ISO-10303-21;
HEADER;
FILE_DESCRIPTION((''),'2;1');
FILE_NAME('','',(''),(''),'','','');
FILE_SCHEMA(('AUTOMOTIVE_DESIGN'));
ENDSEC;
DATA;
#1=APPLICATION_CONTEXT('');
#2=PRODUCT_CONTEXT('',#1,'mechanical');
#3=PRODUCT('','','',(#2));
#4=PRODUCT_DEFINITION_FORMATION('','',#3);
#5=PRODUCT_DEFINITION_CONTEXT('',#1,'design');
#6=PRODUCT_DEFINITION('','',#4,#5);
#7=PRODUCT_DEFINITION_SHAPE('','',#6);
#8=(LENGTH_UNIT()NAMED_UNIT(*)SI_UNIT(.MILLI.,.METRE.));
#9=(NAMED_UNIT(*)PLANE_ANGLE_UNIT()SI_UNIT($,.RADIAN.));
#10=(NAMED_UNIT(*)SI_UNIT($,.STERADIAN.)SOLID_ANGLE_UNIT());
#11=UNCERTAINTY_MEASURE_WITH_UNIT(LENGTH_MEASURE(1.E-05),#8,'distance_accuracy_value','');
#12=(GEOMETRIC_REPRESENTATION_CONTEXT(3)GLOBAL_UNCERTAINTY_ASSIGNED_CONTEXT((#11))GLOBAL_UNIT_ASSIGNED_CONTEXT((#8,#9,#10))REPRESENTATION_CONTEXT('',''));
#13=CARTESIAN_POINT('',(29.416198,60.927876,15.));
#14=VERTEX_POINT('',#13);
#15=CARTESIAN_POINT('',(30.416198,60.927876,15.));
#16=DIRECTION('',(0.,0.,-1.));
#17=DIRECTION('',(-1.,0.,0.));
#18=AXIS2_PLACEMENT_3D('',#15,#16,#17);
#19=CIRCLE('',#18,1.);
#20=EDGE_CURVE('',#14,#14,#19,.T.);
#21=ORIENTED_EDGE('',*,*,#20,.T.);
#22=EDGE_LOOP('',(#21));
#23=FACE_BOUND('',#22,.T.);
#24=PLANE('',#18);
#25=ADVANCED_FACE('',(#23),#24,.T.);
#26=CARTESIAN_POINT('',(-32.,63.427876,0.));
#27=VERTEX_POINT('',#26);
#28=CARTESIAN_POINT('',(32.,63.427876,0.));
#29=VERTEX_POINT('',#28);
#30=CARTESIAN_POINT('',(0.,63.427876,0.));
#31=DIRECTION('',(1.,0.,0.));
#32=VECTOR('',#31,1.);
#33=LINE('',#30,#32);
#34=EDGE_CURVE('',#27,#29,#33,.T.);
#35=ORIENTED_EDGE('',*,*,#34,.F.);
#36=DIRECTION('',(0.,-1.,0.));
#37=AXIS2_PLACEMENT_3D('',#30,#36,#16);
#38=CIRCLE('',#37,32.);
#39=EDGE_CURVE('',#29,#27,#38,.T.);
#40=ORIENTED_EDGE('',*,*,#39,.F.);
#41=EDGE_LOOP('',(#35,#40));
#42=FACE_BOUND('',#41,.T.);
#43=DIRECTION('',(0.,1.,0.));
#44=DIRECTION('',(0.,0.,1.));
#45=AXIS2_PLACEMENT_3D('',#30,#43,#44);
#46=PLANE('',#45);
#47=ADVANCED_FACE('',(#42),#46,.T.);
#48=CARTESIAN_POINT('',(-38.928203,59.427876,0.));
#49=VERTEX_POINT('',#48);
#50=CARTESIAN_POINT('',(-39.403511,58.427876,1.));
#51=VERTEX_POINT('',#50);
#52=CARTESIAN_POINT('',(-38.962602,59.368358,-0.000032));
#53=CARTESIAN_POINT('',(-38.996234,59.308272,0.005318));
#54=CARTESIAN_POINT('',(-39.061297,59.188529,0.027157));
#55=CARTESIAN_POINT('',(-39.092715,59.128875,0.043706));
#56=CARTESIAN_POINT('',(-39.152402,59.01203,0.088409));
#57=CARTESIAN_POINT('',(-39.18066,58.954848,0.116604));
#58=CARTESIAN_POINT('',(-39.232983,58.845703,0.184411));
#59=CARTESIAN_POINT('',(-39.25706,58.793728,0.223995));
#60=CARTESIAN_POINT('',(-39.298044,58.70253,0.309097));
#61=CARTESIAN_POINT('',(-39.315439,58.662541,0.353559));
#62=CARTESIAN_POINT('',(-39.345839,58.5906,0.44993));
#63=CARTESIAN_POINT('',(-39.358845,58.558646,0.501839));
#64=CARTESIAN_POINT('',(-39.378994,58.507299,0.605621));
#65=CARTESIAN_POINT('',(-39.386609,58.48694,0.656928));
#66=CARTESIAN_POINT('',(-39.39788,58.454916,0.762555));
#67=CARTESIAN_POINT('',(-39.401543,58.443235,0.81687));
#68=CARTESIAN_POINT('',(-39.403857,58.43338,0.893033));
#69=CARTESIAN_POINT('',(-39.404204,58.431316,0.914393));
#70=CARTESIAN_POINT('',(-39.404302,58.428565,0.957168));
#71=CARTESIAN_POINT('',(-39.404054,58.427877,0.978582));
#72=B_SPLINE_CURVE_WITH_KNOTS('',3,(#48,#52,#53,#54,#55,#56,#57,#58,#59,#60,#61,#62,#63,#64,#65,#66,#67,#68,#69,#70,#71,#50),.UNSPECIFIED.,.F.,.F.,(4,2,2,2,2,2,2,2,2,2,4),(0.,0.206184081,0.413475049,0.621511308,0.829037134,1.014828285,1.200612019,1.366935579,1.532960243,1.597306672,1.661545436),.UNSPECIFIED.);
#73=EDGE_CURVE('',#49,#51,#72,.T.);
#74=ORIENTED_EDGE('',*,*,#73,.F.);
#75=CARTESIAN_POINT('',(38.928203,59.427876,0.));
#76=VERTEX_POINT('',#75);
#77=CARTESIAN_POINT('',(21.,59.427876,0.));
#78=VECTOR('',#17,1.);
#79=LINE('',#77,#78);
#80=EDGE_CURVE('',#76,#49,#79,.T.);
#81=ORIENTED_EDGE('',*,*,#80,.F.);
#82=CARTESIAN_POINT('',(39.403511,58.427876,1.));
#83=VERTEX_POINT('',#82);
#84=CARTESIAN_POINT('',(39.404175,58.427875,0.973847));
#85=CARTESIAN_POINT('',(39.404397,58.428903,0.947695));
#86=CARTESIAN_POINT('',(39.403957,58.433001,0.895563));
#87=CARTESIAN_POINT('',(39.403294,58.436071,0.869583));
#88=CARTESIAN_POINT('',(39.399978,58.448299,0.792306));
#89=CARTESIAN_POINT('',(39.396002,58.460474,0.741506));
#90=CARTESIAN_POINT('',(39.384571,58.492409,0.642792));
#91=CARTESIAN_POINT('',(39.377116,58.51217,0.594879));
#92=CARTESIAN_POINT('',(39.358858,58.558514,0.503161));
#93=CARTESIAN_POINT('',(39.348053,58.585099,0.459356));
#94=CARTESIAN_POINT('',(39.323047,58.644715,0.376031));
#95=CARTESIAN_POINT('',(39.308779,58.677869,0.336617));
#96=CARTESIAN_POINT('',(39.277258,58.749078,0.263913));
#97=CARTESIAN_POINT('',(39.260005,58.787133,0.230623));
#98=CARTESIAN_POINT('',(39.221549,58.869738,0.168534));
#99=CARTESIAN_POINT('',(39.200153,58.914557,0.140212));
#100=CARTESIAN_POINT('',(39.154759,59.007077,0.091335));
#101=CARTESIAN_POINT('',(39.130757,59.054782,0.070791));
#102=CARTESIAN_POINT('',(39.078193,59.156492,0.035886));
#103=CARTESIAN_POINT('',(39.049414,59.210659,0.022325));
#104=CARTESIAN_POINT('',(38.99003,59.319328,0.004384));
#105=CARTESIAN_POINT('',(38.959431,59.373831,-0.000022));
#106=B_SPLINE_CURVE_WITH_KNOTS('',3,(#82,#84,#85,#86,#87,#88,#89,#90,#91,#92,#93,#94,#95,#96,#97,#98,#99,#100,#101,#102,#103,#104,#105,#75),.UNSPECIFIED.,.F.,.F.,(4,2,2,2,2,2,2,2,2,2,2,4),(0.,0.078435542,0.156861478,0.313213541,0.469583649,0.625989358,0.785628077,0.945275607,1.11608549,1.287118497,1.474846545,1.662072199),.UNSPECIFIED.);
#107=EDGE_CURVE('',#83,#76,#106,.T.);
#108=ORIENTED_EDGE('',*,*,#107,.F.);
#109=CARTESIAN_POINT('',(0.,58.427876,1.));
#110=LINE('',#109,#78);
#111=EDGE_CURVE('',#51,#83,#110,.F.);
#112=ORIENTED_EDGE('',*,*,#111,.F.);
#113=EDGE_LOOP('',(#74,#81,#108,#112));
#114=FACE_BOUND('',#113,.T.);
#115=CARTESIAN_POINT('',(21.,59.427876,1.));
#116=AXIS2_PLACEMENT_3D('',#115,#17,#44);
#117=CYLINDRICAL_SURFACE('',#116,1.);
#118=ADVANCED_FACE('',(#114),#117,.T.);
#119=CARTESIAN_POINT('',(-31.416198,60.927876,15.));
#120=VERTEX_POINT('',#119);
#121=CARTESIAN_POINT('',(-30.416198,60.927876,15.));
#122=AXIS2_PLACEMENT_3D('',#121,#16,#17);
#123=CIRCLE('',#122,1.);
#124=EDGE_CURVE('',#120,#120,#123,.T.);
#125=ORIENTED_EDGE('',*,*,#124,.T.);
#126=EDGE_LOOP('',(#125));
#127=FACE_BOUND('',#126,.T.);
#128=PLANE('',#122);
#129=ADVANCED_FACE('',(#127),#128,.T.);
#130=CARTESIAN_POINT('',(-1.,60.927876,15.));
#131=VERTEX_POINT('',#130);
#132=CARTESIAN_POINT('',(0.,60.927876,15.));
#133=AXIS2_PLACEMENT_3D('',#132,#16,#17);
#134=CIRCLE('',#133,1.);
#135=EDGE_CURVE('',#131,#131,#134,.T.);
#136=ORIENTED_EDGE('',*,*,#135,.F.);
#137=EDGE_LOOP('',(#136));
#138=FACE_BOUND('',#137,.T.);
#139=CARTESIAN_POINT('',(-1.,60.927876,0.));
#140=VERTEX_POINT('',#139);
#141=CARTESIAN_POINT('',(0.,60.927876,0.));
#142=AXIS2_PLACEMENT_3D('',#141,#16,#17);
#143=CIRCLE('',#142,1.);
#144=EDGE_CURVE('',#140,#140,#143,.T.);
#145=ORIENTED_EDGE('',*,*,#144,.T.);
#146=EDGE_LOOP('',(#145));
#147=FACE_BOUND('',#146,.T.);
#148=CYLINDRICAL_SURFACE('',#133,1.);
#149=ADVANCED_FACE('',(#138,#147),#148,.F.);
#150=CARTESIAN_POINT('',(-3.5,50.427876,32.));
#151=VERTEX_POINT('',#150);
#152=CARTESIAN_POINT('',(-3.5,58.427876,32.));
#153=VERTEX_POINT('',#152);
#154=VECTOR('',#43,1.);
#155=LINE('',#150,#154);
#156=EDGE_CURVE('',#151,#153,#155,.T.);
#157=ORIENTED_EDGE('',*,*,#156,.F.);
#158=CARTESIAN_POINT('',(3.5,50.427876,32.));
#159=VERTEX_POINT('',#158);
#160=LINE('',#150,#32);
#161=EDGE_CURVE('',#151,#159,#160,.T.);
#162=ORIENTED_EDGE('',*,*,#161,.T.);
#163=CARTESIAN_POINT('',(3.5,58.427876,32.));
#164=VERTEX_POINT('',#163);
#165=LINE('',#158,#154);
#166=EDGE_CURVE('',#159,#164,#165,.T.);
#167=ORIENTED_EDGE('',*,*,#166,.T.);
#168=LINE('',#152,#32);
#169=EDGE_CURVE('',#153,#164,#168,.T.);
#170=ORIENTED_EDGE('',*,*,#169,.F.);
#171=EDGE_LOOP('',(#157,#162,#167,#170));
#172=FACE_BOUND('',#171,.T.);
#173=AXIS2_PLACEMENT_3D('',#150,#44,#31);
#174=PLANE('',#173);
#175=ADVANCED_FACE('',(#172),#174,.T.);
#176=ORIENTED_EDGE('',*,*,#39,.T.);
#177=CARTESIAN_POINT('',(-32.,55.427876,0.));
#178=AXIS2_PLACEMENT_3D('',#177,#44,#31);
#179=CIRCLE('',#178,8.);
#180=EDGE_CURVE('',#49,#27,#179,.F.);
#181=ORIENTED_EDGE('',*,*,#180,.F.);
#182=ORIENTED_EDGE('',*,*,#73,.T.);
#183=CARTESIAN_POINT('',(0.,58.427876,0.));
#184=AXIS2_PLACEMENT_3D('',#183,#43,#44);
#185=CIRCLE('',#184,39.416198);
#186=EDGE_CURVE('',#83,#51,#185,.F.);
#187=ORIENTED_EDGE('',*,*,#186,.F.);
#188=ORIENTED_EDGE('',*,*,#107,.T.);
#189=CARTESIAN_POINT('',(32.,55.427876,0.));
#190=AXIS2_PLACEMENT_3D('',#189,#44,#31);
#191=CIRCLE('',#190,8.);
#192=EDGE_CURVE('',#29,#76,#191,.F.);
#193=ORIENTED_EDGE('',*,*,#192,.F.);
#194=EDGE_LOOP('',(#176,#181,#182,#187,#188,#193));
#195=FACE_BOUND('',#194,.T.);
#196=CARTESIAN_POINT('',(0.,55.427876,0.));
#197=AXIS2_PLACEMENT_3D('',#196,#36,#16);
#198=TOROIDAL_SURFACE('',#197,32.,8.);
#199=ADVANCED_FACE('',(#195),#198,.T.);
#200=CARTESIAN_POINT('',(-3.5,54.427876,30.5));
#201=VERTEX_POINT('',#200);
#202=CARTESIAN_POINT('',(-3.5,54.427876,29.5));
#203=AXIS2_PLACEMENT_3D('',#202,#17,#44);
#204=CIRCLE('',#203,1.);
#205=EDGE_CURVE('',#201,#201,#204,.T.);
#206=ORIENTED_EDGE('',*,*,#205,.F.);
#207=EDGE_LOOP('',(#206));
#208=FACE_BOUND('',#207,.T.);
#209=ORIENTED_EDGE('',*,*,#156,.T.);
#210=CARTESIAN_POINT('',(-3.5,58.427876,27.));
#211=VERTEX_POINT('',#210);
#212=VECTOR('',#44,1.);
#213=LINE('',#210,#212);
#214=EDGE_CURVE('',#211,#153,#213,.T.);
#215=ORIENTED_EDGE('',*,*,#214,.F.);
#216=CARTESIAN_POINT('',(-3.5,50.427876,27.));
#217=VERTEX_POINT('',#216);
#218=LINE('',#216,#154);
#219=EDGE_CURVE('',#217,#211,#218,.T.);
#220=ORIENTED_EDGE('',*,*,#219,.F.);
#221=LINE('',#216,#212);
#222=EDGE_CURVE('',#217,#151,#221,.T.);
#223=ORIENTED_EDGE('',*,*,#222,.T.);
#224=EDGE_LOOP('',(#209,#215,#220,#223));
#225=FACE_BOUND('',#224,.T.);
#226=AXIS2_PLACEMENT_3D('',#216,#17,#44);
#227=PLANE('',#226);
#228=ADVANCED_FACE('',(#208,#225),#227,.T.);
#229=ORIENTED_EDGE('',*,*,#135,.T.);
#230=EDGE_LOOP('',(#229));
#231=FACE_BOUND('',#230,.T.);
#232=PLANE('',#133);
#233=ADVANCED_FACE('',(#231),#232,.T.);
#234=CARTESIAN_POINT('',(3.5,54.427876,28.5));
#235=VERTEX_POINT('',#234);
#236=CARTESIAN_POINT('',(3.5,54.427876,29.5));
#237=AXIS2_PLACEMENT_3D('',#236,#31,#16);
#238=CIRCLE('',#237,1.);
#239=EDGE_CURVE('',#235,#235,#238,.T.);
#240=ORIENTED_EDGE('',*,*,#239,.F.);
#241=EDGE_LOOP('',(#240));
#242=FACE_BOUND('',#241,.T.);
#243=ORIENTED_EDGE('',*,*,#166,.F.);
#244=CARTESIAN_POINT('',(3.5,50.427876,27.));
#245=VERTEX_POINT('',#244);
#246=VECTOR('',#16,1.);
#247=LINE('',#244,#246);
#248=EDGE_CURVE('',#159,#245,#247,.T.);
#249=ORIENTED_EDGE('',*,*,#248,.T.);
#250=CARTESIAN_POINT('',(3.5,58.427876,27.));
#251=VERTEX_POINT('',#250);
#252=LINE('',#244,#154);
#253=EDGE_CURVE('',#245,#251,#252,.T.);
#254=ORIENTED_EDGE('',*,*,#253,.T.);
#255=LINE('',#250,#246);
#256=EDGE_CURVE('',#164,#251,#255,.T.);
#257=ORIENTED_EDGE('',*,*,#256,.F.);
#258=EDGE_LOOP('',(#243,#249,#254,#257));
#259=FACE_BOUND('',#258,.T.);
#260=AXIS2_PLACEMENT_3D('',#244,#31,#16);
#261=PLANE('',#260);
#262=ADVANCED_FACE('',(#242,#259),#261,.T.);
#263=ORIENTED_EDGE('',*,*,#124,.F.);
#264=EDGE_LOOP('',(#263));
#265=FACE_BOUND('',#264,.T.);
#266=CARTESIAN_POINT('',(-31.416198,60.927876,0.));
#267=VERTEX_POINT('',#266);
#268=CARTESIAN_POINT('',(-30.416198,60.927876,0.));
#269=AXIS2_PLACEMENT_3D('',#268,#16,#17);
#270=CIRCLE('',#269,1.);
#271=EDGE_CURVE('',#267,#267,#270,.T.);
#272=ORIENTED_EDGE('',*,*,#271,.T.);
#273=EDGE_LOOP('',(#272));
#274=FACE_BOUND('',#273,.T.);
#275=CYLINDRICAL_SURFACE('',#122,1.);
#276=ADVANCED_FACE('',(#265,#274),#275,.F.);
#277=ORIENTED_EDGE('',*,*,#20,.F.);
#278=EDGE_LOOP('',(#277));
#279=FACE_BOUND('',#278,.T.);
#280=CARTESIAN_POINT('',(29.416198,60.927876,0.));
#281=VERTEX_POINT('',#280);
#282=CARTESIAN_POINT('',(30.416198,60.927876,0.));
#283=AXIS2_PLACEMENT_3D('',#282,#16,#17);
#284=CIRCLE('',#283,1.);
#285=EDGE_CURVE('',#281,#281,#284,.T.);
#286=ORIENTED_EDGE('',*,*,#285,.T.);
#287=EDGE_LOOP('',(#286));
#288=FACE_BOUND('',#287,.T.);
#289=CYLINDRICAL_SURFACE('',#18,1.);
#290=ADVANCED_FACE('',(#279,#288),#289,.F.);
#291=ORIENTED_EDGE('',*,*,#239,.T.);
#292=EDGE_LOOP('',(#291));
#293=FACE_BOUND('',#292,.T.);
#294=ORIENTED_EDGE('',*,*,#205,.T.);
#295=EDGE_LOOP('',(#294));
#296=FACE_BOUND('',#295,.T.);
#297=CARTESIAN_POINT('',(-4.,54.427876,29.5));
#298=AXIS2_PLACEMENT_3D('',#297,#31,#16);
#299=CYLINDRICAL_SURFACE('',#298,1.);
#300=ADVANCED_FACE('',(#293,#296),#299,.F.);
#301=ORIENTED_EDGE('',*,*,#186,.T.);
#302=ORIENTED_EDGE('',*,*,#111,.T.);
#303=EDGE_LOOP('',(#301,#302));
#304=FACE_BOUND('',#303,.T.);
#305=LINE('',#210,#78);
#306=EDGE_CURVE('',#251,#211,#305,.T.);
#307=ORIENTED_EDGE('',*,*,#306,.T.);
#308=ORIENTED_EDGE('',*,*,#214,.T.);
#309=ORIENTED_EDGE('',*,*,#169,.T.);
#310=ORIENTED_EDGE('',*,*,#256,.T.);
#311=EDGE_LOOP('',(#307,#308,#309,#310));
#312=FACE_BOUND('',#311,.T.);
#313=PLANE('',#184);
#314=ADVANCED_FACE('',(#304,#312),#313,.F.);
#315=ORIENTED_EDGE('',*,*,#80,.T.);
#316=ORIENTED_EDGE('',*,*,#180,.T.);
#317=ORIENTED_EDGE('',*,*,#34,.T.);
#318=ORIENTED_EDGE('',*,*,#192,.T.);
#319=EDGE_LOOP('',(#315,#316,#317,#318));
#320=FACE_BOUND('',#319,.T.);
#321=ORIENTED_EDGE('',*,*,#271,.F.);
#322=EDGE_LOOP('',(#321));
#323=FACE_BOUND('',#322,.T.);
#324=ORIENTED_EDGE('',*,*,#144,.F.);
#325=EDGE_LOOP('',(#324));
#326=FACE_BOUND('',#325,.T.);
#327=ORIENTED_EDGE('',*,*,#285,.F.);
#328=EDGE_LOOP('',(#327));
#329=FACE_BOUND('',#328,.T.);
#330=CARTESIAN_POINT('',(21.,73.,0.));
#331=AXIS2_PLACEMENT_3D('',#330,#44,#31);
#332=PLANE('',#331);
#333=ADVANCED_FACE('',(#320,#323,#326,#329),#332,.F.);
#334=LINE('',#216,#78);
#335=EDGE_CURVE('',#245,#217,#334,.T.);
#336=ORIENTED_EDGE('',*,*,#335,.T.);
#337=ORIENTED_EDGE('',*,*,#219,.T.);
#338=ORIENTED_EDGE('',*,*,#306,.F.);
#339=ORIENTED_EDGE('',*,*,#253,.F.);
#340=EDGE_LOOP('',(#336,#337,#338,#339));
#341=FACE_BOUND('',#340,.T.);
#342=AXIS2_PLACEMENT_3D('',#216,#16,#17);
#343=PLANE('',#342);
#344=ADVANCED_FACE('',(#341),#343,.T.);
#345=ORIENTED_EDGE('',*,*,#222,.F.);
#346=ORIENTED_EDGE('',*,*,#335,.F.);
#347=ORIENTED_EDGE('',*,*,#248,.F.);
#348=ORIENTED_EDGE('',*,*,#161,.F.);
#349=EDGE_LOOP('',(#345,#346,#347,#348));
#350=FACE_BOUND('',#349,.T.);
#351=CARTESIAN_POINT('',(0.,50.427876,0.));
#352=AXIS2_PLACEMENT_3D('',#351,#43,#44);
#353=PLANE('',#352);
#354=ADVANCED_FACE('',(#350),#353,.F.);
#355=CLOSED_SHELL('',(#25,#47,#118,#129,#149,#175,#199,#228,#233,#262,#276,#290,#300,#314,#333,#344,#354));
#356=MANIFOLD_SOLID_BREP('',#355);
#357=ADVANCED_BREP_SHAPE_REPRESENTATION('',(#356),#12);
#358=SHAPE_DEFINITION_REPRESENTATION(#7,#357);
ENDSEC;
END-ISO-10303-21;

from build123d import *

# Parameters (mm, degrees)
CUT_EXTRUDE3_DEPTH           = 60
CUT_EXTRUDE5_DEPTH           = 2
CUT_EXTRUDE5_DEPTH_BACK      = 30
SKETCH9_R                    = 38
SKETCH9_R_2                  = 23
SKETCH19_W                   = 12
SKETCH19_H                   = 36.5
CUT_REVOLVE2_ANGLE           = 65
CUT_REVOLVE2_OTHER_WAY_ANGLE = 65
SKETCH21_W                   = 3.25
SKETCH21_H                   = 4
BOSS_EXTRUDE3_DEPTH          = 1.35
CIRPATTERN1_COUNT            = 5
CUT_EXTRUDE9_START           = -5
CUT_EXTRUDE9_DEPTH           = 5
SKETCH23_R                   = 10.5
CUT_EXTRUDE10_DEPTH          = 10
SKETCH24_W                   = 15
SKETCH24_H                   = 8
BOSS_EXTRUDE4_DEPTH          = 8
SKETCH26_W                   = 10
SKETCH26_H                   = 6
CUT_EXTRUDE11_DEPTH          = 10
SKETCH27_W                   = 4
SKETCH27_H                   = 5
CUT_EXTRUDE12_DEPTH          = 5
CUT_EXTRUDE14_DEPTH          = 2
CUT_EXTRUDE14_DEPTH_BACK     = 30
SKETCH29_R                   = 1
CUT_EXTRUDE15_DEPTH          = 15
FILLET1_R                    = 6
FILLET2_R                    = 8
INTERSECT1_DEPTH             = 58.427876097
SKETCH31_W                   = 7
SKETCH31_H                   = 5
BOSS_EXTRUDE7_DEPTH          = 8
SKETCH32_R                   = 1
CUT_EXTRUDE16_DEPTH          = 7.5
FILLET3_R                    = 1


# Read off the part's stored shape, not the designer's step: Cut-Extrude9, Intersect1
with BuildPart() as part:
    # Sketch1 → Revolve1 (revolve)
    with BuildSketch(Plane.XY, mode=Mode.PRIVATE) as revolve1_sk:
        with BuildLine():
            Line((0, 63.427876097), (32, 63.427876097))
            ThreePointArc((32, 63.427876097), (37.656854249, 61.084730346), (40, 55.427876097))
            Line((40, 55.427876097), (40, 28.846818009))
            ThreePointArc((40, 28.846818009), (38.792081772, 24.082439968), (35.460140376, 20.469057744))
            Line((35.460140376, 20.469057744), (28.539859624, 15.958818353))
            ThreePointArc((28.539859624, 15.958818353), (25.207918228, 12.345436129), (24, 7.581058088))
            Line((24, 7.581058088), (24, 3.25))
            Line((24, 3.25), (24.35, 3))
            Line((24.35, 3), (24.35, 0))
            Line((24.35, 0), (22.5, 0))
            Line((22.5, 0), (22.5, 12.5))
            ThreePointArc((22.5, 12.5), (22.353553391, 12.853553391), (22, 13))
            Line((22, 13), (0, 13))
            Line((0, 13), (0, 63.427876097))
        make_face()
    revolve(revolve1_sk.sketch.rotate(Axis((0, 0, 0), (0, 1, 0)), 90), axis=Axis((0, 0, 0), (0, 1, 0)))

    # Sketch11 → Cut-Extrude3 (cut)
    with BuildSketch(Plane(origin=(0, 13, 0), x_dir=(-1, 0, 0), z_dir=(0, -1, 0))):
        with BuildLine():
            Line((-21, 0), (21, 0))
            ThreePointArc((21, 0), (0, 21), (-21, 0))
        make_face()
    extrude(amount=-CUT_EXTRUDE3_DEPTH, mode=Mode.SUBTRACT)

    # Sketch9 → Cut-Extrude5 (cut, two sides: drawn at the far end of the back side and taken through both)
    with BuildSketch(Plane(origin=(0, 55.427876097, 0), x_dir=(1, 0, 0), z_dir=(0, 1, 0)).offset(-CUT_EXTRUDE5_DEPTH_BACK)):
        with Locations(Location((0, 0, 0), (0, 0, 270))):
            Circle(SKETCH9_R)
        with Locations(Location((0, 0, 0), (0, 0, 270))):
            Circle(SKETCH9_R_2, mode=Mode.SUBTRACT)
    extrude(amount=CUT_EXTRUDE5_DEPTH + CUT_EXTRUDE5_DEPTH_BACK, mode=Mode.SUBTRACT)

    # Sketch19 → Cut-Revolve2 (revolve, cut)
    with BuildSketch(Plane(origin=(0, 0, 0), x_dir=(0, 0, -1), z_dir=(1, 0, 0))):
        with Locations((-41.064715832, 37.177876097)):
            Rectangle(SKETCH19_W, SKETCH19_H)
    revolve(axis=Axis((0, 0, 0), (0, 1, 0)), revolution_arc=CUT_REVOLVE2_ANGLE, mode=Mode.SUBTRACT)

    # Sketch19 → Cut-Revolve2 other way (revolve, cut)
    with BuildSketch(Plane(origin=(0, 0, 0), x_dir=(0, 0, -1), z_dir=(1, 0, 0))):
        with Locations((-41.064715832, 37.177876097)):
            Rectangle(SKETCH19_W, SKETCH19_H)
    revolve(axis=Axis((0, 0, 0), (0, -1, 0)), revolution_arc=CUT_REVOLVE2_OTHER_WAY_ANGLE, mode=Mode.SUBTRACT)

    # Sketch21 → Boss-Extrude3 (add)
    with BuildSketch(Plane(origin=(0, 0, 22.5), x_dir=(-1, 0, 0), z_dir=(0, 0, -1))):
        with Locations((0, 2)):
            Rectangle(SKETCH21_W, SKETCH21_H)
    boss_extrude3 = extrude(amount=BOSS_EXTRUDE3_DEPTH)

    # CirPattern1: Boss-Extrude3 ×5 about axis
    cirpattern1_axis = Axis((0, 0, 0), (0, 1, 0))
    for i in range(1, CIRPATTERN1_COUNT):
        add(boss_extrude3.rotate(cirpattern1_axis, i * 360 / CIRPATTERN1_COUNT))

    # Cut-Extrude9 outline → Cut-Extrude9 (cut)
    with BuildSketch(Plane(origin=(0, 63.427876097, 0), x_dir=(1, 0, 0), z_dir=(0, 1, 0)).offset(CUT_EXTRUDE9_START)):
        with BuildLine():
            ThreePointArc((40, 0), (0, 40), (-40, 0))
            Line((-40, 0), (-21, 0))
            ThreePointArc((-21, 0), (0, 21), (21, 0))
            Line((21, 0), (40, 0))
        make_face()
    extrude(amount=CUT_EXTRUDE9_DEPTH, mode=Mode.SUBTRACT)

    # Sketch23 → Cut-Extrude10 (cut)
    with BuildSketch(Plane(origin=(0, 0, -40), x_dir=(-1, 0, 0), z_dir=(0, 0, -1))):
        with Locations((0, 42.137876097)):
            Circle(SKETCH23_R)
    extrude(amount=-CUT_EXTRUDE10_DEPTH, mode=Mode.SUBTRACT)

    # Sketch24 → Boss-Extrude4 (add)
    with BuildSketch(Plane(origin=(0, 58.427876097, 0), x_dir=(1, 0, 0), z_dir=(0, 1, 0))):
        with Locations((0, 30)):
            Rectangle(SKETCH24_W, SKETCH24_H)
    extrude(amount=-BOSS_EXTRUDE4_DEPTH)

    # Sketch26 → Cut-Extrude11 (cut)
    with BuildSketch(Plane(origin=(0, 58.427876097, 0), x_dir=(1, 0, 0), z_dir=(0, 1, 0))):
        with Locations((0, 30)):
            Rectangle(SKETCH26_W, SKETCH26_H)
    extrude(amount=-CUT_EXTRUDE11_DEPTH, mode=Mode.SUBTRACT)

    # Sketch27 → Cut-Extrude12 (cut)
    with BuildSketch(Plane(origin=(7.5, 0, 0), x_dir=(0, 0, -1), z_dir=(1, 0, 0))):
        with Locations((30, 53.927876097)):
            Rectangle(SKETCH27_W, SKETCH27_H)
    extrude(amount=-CUT_EXTRUDE12_DEPTH, mode=Mode.SUBTRACT)

    # Sketch28 → Cut-Extrude14 (cut, two sides: drawn at the far end of the back side and taken through both)
    with BuildSketch(Plane(origin=(0, 55.427876097, 0), x_dir=(1, 0, 0), z_dir=(0, 1, 0)).offset(-CUT_EXTRUDE14_DEPTH_BACK)):
        with BuildLine():
            Line((-22.912878475, -2), (22.912878475, -2))
            ThreePointArc((22.912878475, -2), (0, -23), (-22.912878475, -2))
        make_face()
    extrude(amount=CUT_EXTRUDE14_DEPTH + CUT_EXTRUDE14_DEPTH_BACK, mode=Mode.SUBTRACT)

    # Sketch29 → Cut-Extrude15 (cut)
    with BuildSketch(Plane(origin=(0, 0, 0), x_dir=(-1, 0, 0), z_dir=(0, 0, -1))):
        with Locations((-30.416198487, 60.927876097)):
            Circle(SKETCH29_R)
        with Locations((30.416198487, 60.927876097)):
            Circle(SKETCH29_R)
        with Locations((0, 60.927876097)):
            Circle(SKETCH29_R)
    extrude(amount=-CUT_EXTRUDE15_DEPTH, mode=Mode.SUBTRACT)

    # Fillet1
    fillet1_edges = [part.edges().sort_by_distance(p)[0] for p in [
        (21, 35.713938048, 0),
        (-21, 35.713938048, 0),
    ]]
    fillet(fillet1_edges, radius=FILLET1_R)

    # Fillet2
    fillet2_edges = [part.edges().sort_by_distance(p)[0] for p in [
        (-22.912878475, 41.427876097, 2),
        (22.912878475, 41.427876097, 2),
    ]]
    fillet(fillet2_edges, radius=FILLET2_R)

    # Intersect1 outline → Intersect1 (cut)
    with BuildSketch(Plane(origin=(0, 0, 0), x_dir=(1, 0, 0), z_dir=(0, 1, 0))):
        with BuildLine():
            Line((-37.508702776, -13.895942431), (-42, -15.355253362))
            Line((-42, -15.355253362), (-42, -41))
            Line((-42, -41), (42, -41))
            Line((42, -41), (42, -15.355253362))
            Line((42, -15.355253362), (37.508702776, -13.895942431))
            ThreePointArc((37.508702776, -13.895942431), (0, 40), (-37.508702776, -13.895942431))
        make_face()
        with BuildLine():
            ThreePointArc((19.246817919, 8.4), (18.767687244, 2.713664655), (13.747727085, 0))
            Line((13.747727085, 0), (-13.747727085, 0))
            ThreePointArc((-13.747727085, 0), (-18.767687244, 2.713664655), (-19.246817919, 8.4))
            ThreePointArc((-19.246817919, 8.4), (0, 21), (19.246817919, 8.4))
        make_face(mode=Mode.SUBTRACT)
    extrude(amount=INTERSECT1_DEPTH, mode=Mode.SUBTRACT)

    # Sketch31 → Boss-Extrude7 (add)
    with BuildSketch(Plane(origin=(0, 58.427876097, 0), x_dir=(1, 0, 0), z_dir=(0, 1, 0))):
        with Locations((0, -29.5)):
            Rectangle(SKETCH31_W, SKETCH31_H)
    extrude(amount=-BOSS_EXTRUDE7_DEPTH)

    # Sketch32 → Cut-Extrude16 (cut)
    with BuildSketch(Plane(origin=(3.5, 0, 0), x_dir=(0, 0, -1), z_dir=(1, 0, 0))):
        with Locations((-29.5, 54.427876097)):
            Circle(SKETCH32_R)
    extrude(amount=-CUT_EXTRUDE16_DEPTH, mode=Mode.SUBTRACT)

    # Fillet3
    fillet3_edges = [part.edges().sort_by_distance(p)[0] for p in [
        (0, 58.427876097, 0),
    ]]
    fillet(fillet3_edges, radius=FILLET3_R)


solid = part.part
